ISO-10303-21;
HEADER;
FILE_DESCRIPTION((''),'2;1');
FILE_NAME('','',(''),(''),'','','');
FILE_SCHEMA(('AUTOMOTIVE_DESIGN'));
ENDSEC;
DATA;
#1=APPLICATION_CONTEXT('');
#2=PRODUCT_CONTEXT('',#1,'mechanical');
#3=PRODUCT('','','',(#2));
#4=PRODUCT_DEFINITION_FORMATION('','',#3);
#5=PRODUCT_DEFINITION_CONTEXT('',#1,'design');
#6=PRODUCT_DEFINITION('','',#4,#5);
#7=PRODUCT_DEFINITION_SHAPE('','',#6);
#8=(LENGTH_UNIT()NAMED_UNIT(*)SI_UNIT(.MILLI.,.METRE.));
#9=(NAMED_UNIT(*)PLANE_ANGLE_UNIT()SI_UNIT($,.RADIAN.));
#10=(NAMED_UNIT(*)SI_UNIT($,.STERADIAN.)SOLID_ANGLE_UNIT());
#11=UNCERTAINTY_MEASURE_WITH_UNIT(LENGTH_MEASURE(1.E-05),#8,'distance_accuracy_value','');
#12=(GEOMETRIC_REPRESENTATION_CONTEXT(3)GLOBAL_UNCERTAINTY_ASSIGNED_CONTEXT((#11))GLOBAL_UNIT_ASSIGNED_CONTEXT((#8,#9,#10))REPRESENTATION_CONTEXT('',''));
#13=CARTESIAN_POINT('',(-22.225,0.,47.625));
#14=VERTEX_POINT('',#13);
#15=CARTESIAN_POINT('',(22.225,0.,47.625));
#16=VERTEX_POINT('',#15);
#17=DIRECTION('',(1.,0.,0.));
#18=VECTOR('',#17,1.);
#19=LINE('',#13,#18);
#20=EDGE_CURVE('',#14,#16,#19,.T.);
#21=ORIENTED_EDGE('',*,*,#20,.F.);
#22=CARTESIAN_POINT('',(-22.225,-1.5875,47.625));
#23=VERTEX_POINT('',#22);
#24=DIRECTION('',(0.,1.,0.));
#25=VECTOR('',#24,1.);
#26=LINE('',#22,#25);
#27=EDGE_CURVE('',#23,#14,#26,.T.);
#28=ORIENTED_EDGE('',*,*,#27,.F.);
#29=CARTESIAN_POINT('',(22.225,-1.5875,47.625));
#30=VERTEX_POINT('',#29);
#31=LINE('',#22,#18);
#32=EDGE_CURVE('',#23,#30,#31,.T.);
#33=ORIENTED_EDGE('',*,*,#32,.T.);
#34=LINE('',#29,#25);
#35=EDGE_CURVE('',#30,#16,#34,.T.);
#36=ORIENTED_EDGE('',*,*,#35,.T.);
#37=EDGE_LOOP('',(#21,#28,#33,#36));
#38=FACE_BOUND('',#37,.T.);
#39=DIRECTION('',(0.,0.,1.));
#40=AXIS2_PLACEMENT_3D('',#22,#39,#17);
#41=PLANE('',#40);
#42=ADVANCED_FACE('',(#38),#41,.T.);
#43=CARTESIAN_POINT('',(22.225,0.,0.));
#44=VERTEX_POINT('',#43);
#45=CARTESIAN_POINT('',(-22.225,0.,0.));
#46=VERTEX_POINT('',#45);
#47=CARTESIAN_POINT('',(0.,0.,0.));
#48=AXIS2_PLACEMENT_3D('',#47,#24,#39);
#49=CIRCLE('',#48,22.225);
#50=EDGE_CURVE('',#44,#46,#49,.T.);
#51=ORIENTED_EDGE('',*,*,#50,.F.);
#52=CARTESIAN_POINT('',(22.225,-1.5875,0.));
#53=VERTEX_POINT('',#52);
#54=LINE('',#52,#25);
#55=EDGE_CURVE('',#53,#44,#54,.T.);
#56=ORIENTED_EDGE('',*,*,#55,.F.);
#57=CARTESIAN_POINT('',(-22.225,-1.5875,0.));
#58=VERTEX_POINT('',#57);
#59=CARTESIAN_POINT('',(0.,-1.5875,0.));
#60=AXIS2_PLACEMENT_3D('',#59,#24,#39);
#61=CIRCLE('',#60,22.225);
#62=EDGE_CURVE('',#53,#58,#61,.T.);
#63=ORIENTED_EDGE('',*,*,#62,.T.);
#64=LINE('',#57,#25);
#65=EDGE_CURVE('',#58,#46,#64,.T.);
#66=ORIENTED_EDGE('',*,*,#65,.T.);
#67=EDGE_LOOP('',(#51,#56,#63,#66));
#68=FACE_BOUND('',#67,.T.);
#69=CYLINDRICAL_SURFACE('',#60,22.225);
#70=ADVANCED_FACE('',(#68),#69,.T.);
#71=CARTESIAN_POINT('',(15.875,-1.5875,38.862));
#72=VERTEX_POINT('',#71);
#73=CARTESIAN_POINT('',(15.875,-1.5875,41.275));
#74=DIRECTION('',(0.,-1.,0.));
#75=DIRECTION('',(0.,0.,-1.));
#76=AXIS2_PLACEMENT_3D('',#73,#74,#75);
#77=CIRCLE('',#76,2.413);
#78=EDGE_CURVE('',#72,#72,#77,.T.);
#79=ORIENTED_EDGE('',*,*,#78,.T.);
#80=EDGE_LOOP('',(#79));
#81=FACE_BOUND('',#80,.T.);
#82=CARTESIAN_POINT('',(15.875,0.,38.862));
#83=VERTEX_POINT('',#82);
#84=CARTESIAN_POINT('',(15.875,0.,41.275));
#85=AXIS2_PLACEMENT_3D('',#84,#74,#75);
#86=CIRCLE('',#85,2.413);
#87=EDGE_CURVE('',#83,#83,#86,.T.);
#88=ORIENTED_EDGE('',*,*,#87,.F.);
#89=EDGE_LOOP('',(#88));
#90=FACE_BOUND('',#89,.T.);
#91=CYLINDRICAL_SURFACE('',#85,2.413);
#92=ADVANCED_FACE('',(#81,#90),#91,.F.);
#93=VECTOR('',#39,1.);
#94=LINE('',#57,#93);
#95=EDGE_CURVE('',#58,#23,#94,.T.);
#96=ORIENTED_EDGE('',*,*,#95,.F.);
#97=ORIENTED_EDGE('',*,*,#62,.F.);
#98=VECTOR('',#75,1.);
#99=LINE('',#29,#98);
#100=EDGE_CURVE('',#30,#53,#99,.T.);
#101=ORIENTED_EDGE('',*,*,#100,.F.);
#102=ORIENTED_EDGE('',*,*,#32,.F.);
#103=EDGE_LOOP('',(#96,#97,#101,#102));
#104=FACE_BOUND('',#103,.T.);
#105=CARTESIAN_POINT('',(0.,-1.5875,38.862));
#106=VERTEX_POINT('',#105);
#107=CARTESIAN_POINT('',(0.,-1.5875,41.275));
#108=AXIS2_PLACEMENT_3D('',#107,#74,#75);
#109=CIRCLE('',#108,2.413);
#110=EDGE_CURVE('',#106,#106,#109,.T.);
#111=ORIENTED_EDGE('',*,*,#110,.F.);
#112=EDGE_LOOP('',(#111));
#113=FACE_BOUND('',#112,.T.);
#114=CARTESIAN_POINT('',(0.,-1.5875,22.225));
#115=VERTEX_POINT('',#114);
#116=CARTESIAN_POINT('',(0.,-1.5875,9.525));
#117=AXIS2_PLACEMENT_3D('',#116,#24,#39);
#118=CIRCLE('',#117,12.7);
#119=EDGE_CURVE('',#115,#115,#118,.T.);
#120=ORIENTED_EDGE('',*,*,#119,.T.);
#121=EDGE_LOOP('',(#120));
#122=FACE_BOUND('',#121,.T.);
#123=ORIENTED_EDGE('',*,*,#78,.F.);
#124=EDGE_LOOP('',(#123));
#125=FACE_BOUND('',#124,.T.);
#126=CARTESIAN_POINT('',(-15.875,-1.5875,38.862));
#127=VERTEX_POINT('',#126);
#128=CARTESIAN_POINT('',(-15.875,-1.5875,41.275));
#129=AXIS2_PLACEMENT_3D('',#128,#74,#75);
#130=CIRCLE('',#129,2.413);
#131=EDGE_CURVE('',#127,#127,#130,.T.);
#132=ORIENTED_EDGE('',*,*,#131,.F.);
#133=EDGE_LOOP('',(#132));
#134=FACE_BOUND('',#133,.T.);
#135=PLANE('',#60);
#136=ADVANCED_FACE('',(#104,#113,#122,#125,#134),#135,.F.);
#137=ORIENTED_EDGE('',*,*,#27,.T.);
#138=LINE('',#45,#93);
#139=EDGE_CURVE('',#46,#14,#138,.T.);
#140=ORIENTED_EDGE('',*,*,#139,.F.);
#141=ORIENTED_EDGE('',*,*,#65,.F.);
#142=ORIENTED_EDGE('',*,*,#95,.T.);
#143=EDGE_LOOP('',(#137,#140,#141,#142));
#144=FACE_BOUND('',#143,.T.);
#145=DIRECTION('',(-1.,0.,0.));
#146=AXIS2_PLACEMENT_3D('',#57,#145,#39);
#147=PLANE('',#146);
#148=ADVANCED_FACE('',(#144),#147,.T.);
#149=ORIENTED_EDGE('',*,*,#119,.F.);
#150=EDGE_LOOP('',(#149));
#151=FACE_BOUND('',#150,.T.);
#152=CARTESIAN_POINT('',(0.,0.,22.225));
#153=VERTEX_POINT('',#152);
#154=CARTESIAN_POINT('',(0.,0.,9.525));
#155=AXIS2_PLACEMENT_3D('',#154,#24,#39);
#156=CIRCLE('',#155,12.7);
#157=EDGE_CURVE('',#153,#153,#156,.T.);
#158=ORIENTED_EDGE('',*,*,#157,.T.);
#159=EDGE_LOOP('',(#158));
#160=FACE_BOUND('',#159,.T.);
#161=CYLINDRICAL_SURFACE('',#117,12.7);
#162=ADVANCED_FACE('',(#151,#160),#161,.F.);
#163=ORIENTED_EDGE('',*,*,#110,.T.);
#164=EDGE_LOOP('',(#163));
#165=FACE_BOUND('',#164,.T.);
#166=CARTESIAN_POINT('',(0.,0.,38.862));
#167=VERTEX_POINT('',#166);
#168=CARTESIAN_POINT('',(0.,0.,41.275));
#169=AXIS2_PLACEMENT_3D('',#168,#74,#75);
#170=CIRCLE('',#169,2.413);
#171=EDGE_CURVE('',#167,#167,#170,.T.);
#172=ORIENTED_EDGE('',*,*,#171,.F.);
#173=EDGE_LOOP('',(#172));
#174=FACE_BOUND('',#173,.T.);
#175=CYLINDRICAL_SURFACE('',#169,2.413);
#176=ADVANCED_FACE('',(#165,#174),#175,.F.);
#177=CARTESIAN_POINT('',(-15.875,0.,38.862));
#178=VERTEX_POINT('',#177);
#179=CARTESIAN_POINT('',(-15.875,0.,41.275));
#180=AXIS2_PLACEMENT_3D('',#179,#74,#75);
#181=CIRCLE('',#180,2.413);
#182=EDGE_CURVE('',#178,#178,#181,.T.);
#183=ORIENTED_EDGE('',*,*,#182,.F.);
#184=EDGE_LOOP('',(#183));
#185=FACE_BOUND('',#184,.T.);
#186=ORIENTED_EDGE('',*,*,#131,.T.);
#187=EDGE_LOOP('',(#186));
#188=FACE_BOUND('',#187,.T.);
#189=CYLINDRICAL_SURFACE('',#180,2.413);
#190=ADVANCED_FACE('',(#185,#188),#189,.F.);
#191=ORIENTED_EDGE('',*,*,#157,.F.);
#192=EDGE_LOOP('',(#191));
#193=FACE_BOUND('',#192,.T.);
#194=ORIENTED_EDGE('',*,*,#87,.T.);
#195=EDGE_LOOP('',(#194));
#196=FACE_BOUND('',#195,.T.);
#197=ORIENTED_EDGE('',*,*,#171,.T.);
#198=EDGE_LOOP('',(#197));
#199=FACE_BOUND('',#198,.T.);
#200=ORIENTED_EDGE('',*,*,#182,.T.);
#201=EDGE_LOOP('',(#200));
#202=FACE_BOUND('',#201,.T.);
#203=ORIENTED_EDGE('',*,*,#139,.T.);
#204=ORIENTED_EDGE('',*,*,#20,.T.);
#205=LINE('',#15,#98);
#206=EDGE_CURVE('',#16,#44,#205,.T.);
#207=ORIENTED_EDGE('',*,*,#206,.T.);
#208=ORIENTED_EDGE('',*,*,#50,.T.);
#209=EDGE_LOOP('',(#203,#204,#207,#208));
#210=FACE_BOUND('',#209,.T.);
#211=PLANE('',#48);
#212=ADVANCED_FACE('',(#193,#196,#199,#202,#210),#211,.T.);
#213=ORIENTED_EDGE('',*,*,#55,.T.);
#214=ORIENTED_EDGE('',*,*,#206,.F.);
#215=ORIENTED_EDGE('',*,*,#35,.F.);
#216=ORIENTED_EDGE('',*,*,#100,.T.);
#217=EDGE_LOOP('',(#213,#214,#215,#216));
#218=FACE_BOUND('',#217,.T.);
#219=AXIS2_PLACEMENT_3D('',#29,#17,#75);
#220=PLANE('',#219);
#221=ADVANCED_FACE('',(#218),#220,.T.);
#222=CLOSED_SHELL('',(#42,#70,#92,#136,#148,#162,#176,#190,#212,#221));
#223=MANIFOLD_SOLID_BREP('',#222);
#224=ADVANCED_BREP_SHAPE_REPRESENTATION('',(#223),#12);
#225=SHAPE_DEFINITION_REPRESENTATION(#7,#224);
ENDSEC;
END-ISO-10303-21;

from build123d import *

# Parameters (mm, degrees)
SKETCH1_R          = 12.7
BASE_FLANGE1_DEPTH = 1.5875
SKETCH12_R         = 2.413
CUT_EXTRUDE1_DEPTH = 53.579572138


# Sheet-metal steps are written as plain solids
with BuildPart() as part:
    # Sketch1 → Base-Flange1 (new body)
    with BuildSketch(Plane(origin=(0, 0, 0), x_dir=(1, 0, 0), z_dir=(0, 1, 0))):
        with BuildLine():
            Line((-22.225, 0), (-22.225, -47.625))
            Line((-22.225, -47.625), (22.225, -47.625))
            Line((22.225, -47.625), (22.225, 0))
            ThreePointArc((22.225, 0), (0, 22.225), (-22.225, 0))
        make_face()
        with Locations(Location((0, -9.525, 0), (0, 0, 270))):
            Circle(SKETCH1_R, mode=Mode.SUBTRACT)
    extrude(amount=-BASE_FLANGE1_DEPTH)

    # Sketch12 → Cut-Extrude1 (cut, through all)
    with BuildSketch(Plane.XZ.offset(1.5875)):
        with Locations(Location((15.875, 41.275, 0), (0, 0, 270))):
            Circle(SKETCH12_R)
        with Locations(Location((0, 41.275, 0), (0, 0, 270))):
            Circle(SKETCH12_R)
        with Locations(Location((-15.875, 41.275, 0), (0, 0, 270))):
            Circle(SKETCH12_R)
    extrude(amount=-CUT_EXTRUDE1_DEPTH, mode=Mode.SUBTRACT)


solid = part.part
